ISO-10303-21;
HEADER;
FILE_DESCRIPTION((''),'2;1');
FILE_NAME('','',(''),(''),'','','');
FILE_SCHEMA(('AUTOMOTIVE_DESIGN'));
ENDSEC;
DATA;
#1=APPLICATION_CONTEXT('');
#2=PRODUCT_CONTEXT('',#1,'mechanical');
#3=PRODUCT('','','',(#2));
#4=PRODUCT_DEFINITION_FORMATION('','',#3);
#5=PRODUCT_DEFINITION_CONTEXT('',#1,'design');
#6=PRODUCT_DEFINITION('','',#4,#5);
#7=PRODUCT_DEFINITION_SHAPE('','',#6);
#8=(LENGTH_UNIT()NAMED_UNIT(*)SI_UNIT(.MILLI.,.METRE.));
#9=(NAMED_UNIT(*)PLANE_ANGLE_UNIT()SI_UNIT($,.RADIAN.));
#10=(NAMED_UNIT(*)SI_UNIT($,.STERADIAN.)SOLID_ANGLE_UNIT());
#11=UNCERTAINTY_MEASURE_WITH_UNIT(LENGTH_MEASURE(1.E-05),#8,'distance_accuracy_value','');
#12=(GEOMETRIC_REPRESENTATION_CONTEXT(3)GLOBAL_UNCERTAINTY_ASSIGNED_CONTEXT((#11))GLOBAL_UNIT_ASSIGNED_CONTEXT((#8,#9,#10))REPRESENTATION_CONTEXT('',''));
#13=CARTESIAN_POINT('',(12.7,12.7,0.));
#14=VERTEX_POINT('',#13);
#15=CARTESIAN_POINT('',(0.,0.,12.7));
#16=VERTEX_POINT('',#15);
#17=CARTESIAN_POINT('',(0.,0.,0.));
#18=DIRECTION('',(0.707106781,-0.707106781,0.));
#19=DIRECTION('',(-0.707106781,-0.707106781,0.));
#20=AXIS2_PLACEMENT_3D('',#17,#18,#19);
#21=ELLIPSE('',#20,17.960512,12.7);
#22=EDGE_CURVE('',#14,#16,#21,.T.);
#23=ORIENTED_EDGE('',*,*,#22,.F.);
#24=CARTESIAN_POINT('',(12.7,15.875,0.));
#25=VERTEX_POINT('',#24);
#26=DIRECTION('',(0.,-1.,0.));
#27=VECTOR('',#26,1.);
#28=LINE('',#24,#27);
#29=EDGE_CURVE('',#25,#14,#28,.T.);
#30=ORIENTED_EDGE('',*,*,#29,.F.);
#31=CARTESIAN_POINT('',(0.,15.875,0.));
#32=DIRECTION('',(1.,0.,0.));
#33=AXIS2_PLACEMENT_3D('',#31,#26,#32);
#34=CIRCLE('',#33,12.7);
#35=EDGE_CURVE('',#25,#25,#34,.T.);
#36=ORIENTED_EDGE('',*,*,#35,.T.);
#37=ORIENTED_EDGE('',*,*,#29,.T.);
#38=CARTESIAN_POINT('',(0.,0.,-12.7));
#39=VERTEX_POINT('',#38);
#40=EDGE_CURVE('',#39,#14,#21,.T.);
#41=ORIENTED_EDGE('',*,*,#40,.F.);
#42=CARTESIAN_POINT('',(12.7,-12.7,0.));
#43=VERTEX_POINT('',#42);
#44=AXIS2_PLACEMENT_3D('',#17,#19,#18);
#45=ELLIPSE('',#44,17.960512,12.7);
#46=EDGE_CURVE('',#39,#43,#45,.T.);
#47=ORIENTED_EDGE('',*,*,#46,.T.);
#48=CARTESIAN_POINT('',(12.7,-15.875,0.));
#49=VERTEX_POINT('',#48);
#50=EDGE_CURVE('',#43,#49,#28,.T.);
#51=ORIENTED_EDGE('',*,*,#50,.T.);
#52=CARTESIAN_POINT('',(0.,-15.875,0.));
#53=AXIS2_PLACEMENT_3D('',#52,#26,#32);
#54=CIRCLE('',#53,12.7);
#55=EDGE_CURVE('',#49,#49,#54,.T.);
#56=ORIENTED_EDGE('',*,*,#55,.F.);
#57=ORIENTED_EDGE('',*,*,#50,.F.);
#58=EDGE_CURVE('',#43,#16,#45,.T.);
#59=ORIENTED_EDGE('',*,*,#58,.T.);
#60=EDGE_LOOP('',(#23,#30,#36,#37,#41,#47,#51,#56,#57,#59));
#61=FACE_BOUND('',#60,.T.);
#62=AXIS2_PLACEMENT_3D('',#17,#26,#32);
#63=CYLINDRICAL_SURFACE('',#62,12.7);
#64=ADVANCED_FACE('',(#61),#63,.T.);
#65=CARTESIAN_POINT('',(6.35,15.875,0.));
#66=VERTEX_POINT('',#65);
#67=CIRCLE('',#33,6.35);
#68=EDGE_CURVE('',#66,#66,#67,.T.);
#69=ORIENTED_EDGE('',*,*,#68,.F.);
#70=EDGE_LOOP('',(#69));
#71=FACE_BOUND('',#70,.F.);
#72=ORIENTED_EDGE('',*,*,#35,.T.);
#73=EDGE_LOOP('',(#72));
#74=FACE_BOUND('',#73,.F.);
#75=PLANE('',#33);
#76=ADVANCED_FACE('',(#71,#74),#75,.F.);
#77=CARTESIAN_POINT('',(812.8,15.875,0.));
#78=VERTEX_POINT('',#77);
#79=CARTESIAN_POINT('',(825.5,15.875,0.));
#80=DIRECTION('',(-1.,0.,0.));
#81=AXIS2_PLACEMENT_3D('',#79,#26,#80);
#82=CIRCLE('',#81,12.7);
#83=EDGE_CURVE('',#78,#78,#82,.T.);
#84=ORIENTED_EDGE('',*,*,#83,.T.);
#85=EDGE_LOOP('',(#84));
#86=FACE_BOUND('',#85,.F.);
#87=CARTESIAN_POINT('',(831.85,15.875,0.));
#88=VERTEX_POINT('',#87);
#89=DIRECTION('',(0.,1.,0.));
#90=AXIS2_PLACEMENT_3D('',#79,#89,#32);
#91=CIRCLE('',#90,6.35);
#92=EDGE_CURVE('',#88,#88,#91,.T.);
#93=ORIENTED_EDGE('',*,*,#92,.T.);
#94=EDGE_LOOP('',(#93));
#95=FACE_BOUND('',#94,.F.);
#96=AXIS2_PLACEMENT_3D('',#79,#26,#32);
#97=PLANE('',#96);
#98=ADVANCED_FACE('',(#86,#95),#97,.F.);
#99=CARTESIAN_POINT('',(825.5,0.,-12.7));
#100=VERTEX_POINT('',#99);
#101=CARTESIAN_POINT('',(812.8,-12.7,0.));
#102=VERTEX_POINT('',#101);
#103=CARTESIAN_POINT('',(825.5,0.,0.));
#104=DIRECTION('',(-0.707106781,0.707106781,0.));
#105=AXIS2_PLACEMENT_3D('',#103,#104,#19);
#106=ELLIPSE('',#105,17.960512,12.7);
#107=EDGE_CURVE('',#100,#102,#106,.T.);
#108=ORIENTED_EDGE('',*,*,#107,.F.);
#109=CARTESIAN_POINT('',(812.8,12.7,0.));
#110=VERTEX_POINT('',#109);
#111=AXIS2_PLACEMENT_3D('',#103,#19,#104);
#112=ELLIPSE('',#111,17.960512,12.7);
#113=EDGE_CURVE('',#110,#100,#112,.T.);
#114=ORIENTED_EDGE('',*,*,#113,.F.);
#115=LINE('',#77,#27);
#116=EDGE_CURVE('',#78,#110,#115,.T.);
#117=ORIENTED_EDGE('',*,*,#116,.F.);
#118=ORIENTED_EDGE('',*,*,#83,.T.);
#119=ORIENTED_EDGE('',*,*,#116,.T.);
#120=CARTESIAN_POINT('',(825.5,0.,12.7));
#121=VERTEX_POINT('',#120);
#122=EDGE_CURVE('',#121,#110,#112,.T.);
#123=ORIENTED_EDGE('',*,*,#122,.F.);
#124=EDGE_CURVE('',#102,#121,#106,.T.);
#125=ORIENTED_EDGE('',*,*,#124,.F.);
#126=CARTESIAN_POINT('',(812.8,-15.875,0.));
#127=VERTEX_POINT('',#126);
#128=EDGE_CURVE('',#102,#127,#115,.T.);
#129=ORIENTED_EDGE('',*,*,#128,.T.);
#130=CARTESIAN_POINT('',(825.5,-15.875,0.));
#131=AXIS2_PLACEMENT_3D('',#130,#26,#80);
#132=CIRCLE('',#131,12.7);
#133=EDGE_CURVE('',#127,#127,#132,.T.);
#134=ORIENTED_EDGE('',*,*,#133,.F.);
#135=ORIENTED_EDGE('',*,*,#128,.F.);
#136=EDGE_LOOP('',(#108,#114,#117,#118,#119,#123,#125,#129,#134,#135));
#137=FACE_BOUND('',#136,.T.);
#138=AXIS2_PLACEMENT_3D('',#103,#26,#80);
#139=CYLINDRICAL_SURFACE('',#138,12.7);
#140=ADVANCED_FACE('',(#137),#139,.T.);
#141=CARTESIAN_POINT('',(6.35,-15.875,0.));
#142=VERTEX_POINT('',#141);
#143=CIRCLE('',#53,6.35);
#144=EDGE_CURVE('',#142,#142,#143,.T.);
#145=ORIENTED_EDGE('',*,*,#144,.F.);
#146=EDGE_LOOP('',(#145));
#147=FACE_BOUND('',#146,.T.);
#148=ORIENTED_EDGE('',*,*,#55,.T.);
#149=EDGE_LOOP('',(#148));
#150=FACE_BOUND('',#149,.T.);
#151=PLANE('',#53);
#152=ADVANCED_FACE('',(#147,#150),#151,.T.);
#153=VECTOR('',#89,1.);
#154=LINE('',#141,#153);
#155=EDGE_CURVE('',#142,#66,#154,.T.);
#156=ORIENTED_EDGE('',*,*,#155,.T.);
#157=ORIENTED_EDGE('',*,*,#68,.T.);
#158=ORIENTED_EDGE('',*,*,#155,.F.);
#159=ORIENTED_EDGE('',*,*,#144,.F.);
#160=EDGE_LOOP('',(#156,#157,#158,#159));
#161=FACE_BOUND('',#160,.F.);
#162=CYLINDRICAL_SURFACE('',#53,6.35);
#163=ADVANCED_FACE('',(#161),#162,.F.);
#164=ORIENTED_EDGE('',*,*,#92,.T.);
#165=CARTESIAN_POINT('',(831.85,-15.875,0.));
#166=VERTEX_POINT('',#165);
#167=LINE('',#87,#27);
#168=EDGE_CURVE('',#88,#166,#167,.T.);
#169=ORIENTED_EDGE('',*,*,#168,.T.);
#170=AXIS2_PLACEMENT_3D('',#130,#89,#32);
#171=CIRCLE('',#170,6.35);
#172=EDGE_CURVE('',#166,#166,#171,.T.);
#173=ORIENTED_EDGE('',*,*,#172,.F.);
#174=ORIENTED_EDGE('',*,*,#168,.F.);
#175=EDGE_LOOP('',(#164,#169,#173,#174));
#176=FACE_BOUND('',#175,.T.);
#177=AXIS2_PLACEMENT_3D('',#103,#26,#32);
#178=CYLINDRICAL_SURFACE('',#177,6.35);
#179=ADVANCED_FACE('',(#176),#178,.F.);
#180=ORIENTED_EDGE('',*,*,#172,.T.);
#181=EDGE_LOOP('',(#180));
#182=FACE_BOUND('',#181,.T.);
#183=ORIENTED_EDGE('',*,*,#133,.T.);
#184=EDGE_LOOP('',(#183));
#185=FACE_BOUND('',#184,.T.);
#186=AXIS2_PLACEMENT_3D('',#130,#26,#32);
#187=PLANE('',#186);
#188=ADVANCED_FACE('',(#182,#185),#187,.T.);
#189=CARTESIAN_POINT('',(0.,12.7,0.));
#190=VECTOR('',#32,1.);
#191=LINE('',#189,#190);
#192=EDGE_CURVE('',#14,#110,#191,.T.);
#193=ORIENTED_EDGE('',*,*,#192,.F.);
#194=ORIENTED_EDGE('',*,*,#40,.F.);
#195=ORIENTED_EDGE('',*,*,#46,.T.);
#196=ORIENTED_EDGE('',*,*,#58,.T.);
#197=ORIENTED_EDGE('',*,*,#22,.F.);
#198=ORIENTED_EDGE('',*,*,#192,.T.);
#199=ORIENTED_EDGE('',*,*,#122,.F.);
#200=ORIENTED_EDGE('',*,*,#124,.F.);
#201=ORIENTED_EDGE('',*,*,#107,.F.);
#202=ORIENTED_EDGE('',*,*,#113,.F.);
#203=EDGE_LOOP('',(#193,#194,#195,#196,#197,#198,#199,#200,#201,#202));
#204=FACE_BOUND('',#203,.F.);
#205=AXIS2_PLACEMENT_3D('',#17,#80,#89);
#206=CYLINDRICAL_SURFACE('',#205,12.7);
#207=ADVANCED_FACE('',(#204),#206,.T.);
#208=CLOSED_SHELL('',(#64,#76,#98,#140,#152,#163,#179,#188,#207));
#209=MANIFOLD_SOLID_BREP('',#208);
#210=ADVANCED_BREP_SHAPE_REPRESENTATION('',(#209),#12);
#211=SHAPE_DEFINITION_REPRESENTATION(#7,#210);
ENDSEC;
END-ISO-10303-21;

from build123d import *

# Parameters (mm, degrees)
F1_DEPTH      = 15.875
F0_R          = 12.7
F3_END_RADIUS = 12.7
F2_R          = 12.7
F3_REACH      = 874.1220244843
F7_R          = 6.35
F8_DEPTH      = 50.8


# Not quite as in the source:
# - a feature of the source that left no trace in its solid (it failed there, or was rolled back) is left out


with BuildPart() as f1:
    # F0 (on Front) → F1 (new body, symmetric)
    with BuildSketch(Plane.XZ):
        with BuildLine():
            ThreePointArc((838.2, 0), (825.5, 12.7), (812.8, 0))
            ThreePointArc((812.8, 0), (825.5, -12.7), (838.2, 0))
        make_face()
        with BuildLine():
            ThreePointArc((819.15, 0), (825.5, 6.35), (831.85, 0))
            ThreePointArc((831.85, 0), (825.5, -6.35), (819.15, 0))
        make_face(mode=Mode.SUBTRACT)
    extrude(amount=F1_DEPTH, both=True)



with BuildPart() as f1b:
    # F0 (on Front) → F1, piece 2 (new body, symmetric)
    with BuildSketch(Plane.XZ):
        Circle(F0_R)
    extrude(amount=F1_DEPTH, both=True)


with BuildPart() as f1_1:
    add(f1.part)

    add(f1b.part)  # F3 merges F1b
    f3_end = (Plane(origin=(825.5, 7.9375, 0), x_dir=(0, 0, -1), z_dir=(0, -1, 0)) * Cylinder(F3_END_RADIUS, 3451.9858515901, mode=Mode.PRIVATE)).faces().sort_by_distance((825.5, 7.9375, 12.7))[0]
    # F2 (on Right) → F3 (join, up to the whole of a round face its end follows)
    with BuildSketch(Plane.YZ):
        Circle(F2_R)
    f3_long = extrude(amount=F3_REACH, mode=Mode.PRIVATE)
    add(split(f3_long, bisect_by=f3_end, keep=Keep.ALL, mode=Mode.PRIVATE).solids().sort_by_distance((0, 0, 0))[0])

    # F7 (on face) → F8 (cut)
    with BuildSketch(Plane.XZ.offset(15.875)):
        Circle(F7_R)
    extrude(amount=-F8_DEPTH, mode=Mode.SUBTRACT)


solid = f1_1.part
